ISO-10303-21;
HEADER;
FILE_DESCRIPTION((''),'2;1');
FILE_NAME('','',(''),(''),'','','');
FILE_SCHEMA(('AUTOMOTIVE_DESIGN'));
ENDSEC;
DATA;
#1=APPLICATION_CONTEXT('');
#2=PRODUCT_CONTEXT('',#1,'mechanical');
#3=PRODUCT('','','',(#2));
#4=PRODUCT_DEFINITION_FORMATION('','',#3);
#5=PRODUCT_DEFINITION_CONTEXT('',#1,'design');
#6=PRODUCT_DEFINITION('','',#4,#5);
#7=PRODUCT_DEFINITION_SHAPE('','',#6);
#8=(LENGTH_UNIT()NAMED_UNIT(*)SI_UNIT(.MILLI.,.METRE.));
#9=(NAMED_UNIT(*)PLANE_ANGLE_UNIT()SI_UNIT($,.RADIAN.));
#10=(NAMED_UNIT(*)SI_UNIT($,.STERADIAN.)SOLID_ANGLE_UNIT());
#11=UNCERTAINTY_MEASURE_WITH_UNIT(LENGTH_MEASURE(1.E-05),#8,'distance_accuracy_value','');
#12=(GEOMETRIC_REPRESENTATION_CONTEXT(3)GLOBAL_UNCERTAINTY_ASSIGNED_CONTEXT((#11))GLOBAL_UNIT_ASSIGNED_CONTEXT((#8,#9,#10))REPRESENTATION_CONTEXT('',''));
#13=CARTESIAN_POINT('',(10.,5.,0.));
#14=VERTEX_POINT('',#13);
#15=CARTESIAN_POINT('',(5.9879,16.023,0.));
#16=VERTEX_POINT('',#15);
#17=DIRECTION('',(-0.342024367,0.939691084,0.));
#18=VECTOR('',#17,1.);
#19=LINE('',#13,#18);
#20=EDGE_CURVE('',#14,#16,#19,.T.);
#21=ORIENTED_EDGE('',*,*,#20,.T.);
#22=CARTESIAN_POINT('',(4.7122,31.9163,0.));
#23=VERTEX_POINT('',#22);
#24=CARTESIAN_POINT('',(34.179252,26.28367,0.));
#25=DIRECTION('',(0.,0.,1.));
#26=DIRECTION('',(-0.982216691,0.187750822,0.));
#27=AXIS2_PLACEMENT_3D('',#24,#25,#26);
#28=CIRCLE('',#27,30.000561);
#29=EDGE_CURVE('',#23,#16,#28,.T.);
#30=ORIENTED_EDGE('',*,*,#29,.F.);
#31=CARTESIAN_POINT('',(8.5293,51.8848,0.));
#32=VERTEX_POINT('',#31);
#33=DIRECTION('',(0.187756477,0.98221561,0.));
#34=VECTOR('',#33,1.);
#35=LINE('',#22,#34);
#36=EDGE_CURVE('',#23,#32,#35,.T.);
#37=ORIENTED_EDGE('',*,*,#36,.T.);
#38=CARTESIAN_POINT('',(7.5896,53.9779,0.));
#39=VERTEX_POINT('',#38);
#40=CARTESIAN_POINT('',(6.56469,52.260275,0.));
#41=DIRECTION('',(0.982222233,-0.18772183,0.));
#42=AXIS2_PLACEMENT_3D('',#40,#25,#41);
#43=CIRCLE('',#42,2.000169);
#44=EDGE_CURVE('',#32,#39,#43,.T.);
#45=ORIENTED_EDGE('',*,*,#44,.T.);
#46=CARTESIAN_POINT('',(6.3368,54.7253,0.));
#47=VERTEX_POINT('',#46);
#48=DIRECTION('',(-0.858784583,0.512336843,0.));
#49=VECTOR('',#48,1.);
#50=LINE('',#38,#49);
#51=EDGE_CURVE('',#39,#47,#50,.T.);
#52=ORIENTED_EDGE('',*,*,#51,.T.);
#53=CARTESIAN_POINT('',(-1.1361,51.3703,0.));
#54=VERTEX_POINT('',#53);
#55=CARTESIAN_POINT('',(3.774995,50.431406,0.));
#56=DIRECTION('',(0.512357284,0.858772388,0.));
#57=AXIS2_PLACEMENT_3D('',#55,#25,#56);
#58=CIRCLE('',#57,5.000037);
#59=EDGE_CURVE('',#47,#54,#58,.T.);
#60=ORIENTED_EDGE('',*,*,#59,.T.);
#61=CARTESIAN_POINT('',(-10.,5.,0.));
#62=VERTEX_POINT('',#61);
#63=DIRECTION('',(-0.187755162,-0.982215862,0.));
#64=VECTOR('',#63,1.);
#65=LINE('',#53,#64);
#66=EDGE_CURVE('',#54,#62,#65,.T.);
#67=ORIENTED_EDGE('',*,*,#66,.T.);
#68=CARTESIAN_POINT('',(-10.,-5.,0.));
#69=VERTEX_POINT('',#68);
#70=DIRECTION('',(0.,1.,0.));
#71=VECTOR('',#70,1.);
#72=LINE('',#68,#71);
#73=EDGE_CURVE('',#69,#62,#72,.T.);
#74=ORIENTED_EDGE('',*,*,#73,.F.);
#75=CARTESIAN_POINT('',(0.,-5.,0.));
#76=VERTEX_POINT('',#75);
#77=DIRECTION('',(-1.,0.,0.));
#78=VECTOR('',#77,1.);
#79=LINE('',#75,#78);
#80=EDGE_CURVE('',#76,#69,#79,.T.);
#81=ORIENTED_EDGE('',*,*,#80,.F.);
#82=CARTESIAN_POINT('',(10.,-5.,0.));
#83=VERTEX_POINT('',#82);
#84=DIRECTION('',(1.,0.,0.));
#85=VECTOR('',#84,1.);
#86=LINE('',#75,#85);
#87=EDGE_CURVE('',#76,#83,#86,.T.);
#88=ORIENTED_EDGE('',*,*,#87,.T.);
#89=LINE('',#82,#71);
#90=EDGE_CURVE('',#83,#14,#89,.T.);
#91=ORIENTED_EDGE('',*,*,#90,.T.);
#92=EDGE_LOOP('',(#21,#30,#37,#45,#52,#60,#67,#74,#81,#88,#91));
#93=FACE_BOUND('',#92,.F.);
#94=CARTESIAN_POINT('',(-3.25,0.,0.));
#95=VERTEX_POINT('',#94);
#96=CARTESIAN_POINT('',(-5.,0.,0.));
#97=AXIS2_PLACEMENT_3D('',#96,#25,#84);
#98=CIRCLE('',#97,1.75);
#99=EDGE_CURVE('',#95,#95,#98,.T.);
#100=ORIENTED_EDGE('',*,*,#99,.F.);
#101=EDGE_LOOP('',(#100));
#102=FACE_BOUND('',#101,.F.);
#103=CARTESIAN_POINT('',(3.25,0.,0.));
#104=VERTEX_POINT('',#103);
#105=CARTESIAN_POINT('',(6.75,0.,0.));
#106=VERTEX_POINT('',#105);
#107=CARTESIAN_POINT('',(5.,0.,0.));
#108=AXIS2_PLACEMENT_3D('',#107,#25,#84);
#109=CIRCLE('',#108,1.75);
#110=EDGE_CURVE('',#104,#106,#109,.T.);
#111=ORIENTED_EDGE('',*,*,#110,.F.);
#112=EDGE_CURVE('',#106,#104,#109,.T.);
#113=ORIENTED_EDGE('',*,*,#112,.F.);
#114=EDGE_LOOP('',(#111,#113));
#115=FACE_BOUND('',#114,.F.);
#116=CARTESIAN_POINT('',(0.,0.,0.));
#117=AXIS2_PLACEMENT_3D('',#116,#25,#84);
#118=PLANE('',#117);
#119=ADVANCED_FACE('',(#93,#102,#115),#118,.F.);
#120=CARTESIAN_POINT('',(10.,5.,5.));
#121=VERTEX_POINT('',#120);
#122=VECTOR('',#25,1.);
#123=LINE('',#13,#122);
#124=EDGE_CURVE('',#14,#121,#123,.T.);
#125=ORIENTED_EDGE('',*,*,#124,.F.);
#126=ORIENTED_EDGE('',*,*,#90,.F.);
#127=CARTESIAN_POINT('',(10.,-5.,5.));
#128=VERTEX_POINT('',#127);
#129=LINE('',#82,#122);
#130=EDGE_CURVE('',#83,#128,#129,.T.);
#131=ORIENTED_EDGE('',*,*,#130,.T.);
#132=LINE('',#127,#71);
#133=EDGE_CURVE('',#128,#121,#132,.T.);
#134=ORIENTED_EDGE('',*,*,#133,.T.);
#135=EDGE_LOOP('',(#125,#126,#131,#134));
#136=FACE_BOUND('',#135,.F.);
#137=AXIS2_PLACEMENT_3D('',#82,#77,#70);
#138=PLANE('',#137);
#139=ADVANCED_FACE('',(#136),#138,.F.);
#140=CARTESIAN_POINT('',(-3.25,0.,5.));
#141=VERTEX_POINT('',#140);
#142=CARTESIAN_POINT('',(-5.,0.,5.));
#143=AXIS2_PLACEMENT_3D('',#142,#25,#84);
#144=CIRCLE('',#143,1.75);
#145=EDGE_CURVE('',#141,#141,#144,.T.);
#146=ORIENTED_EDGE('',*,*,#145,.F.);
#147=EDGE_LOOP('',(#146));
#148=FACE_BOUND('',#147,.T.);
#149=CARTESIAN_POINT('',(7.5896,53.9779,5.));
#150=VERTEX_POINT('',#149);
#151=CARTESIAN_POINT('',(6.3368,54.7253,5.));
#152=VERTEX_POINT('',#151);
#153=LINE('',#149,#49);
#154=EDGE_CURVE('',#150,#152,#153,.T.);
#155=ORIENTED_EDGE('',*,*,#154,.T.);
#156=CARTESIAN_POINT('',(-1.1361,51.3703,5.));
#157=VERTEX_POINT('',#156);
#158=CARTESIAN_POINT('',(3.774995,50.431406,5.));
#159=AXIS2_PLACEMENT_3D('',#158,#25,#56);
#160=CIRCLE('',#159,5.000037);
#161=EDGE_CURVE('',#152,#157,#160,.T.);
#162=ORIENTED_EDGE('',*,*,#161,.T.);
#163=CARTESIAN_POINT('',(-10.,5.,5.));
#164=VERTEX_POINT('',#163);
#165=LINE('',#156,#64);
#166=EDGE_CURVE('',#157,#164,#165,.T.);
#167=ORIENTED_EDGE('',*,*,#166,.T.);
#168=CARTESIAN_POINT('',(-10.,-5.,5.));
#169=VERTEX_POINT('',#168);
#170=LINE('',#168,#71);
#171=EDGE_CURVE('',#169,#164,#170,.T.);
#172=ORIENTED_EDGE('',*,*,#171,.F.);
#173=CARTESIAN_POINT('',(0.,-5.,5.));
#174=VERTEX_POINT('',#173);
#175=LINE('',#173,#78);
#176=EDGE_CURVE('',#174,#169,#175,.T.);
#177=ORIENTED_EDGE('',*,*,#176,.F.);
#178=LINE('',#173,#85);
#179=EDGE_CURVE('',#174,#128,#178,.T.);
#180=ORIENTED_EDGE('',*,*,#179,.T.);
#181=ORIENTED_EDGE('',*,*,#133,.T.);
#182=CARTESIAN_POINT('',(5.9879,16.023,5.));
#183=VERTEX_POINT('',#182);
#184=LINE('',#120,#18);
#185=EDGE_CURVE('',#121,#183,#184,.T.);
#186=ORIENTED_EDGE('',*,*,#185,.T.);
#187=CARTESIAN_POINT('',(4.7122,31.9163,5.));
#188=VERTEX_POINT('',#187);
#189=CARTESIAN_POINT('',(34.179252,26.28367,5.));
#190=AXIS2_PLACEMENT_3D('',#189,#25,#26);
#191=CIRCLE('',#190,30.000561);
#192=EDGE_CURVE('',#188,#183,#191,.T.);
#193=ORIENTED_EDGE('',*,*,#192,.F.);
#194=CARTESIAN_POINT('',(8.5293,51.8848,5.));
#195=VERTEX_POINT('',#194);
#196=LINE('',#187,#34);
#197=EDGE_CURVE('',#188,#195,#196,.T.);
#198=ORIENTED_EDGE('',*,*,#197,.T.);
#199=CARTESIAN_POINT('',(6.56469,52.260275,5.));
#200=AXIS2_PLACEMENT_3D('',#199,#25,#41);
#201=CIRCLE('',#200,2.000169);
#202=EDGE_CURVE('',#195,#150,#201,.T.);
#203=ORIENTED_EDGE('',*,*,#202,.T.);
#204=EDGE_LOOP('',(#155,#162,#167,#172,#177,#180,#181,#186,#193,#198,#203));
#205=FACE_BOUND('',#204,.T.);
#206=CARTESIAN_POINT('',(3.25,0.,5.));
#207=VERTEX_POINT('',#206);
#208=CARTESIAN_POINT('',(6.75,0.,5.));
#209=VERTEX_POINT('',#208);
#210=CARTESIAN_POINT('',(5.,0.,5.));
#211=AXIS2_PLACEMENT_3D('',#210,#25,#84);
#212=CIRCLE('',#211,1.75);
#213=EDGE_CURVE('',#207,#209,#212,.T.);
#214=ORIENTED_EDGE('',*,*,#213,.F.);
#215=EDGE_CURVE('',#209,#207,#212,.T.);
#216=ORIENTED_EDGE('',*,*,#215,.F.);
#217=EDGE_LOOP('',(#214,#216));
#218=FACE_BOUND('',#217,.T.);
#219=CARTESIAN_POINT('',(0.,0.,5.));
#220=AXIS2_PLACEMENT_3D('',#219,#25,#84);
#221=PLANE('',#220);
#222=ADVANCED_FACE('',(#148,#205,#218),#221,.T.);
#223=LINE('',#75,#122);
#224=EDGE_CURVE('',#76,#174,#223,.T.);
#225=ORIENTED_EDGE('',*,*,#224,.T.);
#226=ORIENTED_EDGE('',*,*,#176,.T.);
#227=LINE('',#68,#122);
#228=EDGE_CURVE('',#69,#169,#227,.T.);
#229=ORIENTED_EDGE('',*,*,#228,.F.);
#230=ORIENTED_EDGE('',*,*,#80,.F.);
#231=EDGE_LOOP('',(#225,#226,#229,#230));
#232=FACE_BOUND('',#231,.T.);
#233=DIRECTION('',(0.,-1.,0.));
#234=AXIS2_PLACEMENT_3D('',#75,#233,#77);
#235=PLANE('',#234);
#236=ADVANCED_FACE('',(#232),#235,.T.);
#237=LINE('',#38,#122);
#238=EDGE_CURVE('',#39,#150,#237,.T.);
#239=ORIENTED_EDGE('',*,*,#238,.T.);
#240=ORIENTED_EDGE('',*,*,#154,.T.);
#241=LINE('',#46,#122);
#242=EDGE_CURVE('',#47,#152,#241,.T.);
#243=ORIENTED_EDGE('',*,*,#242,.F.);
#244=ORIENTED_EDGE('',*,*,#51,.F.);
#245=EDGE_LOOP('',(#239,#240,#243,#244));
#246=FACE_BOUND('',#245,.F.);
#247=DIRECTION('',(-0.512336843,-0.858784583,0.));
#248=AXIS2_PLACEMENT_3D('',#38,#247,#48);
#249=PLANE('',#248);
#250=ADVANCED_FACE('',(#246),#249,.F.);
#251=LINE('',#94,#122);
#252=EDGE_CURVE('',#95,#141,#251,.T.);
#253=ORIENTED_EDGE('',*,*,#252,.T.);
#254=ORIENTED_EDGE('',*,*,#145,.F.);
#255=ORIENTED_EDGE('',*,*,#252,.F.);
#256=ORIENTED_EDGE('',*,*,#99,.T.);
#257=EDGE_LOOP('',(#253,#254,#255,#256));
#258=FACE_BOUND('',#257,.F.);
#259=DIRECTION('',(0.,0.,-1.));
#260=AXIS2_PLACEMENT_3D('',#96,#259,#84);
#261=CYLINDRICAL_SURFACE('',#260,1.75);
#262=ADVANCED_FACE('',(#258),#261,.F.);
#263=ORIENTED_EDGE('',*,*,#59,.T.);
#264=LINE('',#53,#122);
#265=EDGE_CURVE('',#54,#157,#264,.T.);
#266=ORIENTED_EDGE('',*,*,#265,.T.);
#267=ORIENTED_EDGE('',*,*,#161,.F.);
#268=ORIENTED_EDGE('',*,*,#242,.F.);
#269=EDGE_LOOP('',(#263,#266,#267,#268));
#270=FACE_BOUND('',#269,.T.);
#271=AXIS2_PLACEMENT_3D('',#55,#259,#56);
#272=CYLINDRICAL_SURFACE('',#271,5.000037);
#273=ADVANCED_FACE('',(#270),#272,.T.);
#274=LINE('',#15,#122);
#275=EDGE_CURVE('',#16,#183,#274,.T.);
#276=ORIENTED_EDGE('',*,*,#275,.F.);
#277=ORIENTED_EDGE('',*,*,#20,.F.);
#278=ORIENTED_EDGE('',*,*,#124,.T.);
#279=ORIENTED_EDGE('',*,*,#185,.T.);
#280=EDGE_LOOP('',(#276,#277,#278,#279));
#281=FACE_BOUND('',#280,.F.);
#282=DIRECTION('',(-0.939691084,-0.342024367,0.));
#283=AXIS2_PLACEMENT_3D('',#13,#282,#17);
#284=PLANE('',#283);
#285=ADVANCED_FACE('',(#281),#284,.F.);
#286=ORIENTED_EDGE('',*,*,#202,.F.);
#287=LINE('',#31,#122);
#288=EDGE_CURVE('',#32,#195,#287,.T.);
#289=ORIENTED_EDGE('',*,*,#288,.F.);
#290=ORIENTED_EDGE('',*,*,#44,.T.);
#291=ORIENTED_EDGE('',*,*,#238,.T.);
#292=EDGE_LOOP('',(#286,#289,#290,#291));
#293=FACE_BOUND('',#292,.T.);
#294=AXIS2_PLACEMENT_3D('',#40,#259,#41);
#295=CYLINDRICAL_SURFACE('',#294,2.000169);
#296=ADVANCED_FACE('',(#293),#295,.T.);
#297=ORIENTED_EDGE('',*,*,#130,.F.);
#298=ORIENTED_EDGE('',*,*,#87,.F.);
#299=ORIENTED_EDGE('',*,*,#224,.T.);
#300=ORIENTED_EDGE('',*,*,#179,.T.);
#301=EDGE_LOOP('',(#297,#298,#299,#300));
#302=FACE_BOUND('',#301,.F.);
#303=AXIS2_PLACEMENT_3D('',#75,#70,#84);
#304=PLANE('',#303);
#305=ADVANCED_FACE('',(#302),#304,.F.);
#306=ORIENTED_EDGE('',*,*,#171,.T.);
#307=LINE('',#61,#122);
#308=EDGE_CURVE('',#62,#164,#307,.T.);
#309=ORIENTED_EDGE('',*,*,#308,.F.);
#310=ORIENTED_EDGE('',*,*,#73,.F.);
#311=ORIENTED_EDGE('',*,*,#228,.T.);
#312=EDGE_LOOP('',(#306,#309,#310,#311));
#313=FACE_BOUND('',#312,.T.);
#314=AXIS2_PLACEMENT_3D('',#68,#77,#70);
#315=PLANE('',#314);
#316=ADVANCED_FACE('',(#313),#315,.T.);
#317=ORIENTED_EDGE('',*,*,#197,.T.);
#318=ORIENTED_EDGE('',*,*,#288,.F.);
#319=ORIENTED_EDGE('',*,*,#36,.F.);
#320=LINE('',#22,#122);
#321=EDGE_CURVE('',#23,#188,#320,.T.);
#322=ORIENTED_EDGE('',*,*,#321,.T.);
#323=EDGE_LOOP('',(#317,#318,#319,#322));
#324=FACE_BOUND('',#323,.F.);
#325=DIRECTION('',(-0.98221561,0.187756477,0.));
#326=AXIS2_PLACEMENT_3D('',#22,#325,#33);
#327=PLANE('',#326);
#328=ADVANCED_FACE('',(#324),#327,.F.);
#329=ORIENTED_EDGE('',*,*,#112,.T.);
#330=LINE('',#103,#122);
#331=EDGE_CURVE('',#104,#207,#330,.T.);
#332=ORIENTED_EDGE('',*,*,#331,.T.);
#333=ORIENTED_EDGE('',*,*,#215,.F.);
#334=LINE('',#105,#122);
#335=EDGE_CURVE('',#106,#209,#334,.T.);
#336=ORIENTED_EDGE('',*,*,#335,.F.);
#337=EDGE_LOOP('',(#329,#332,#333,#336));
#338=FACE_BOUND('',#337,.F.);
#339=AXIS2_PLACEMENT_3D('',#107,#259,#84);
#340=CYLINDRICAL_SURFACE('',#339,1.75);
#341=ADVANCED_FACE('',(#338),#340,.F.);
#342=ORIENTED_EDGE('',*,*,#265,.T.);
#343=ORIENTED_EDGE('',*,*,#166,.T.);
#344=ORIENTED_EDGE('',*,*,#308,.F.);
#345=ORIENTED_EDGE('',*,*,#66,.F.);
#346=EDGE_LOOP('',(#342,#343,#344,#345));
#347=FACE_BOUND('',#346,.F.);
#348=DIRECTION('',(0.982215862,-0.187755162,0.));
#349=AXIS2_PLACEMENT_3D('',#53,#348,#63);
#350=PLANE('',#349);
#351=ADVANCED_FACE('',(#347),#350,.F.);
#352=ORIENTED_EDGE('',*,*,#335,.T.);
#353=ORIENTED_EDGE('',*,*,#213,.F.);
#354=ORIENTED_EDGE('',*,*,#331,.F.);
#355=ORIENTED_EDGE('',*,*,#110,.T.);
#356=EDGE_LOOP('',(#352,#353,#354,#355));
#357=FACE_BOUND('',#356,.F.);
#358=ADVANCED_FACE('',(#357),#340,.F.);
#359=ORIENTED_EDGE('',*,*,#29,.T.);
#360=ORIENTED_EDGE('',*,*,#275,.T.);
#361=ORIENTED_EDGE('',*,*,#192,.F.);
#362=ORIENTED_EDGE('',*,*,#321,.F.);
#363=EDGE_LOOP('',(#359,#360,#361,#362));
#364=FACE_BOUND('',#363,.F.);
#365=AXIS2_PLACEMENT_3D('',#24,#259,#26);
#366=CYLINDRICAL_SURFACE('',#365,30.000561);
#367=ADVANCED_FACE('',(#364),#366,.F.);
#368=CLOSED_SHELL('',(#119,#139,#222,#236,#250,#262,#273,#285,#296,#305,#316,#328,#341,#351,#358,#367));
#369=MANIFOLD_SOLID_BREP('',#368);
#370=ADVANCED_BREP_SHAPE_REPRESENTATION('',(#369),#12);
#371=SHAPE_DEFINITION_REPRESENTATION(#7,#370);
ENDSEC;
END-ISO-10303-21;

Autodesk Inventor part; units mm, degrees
ref_plane "YZ Plane" through (0, 0, 0) normal (1, 0, 0) x (0, 1, 0)
ref_plane "XZ Plane" through (0, 0, 0) normal (0, 1, 0) x (-1, 0, 0)
ref_plane "XY Plane" through (0, 0, 0) normal (0, 0, 1) x (1, 0, 0)
sketch "Sketch1" plane through (0, 0, 0) normal (0, 0, 1) x (1, 0, 0)
  line L0 (0, 0) -> (5, 0)
  line L1 (5, 0) -> (-5, 0)
  circle A0 centre (-5, 0) radius 1.75
  circle A1 centre (5, 0) radius 1.75
  line L2 (0, 0) -> (0, -5)
  line L3 (0, -5) -> (10, -5)
  line L4 (10, -5) -> (10, 5)
  line L5 (0, -5) -> (-10, -5)
  line L6 (-10, -5) -> (-10, 5)
  line L7 (10, 5) -> (5.9879, 16.023)
  line L8 (10, 5) -> (21.7305, 5) construction
  line L9 (4.7122, 31.9163) -> (8.5293, 51.8848)
  line L10 (7.5896, 53.9779) -> (6.3368, 54.7253)
  line L11 (-1.1361, 51.3703) -> (-10, 5)
  arc A2 (4.7122, 31.9163) -> (5.9879, 16.023) centre (34.1787, 26.2837) ccw
  arc A3 (8.5293, 51.8848) -> (7.5896, 53.9779) centre (6.5649, 52.2603) ccw
  arc A4 (6.3368, 54.7253) -> (-1.1361, 51.3703) centre (3.775, 50.4315) ccw
  point P0 (3.1596, 23.7939)
  point P1 (8.7922, 53.2603)
  point P2 (0.2046, 58.384)
  dimension "d0" = 5
  dimension "d1" = 10
  dimension "d2" = 3.5
  dimension "d3" = 3.5
  dimension "d4" = 5
  dimension "d5" = 10
  dimension "d6" = 10
  dimension "d7" = 10
  dimension "d8" = 10
  dimension "d9" = 20
  dimension "d10" = 110
  dimension "d11" = 30
  dimension "d12" = 10
  dimension "d13" = 110
  dimension "d14" = 30
  dimension "d15" = 2
  dimension "d16" = 5
extrude "Extrusion1" add sketch "Sketch1" along normal blind 5
properties part number "gripper"
